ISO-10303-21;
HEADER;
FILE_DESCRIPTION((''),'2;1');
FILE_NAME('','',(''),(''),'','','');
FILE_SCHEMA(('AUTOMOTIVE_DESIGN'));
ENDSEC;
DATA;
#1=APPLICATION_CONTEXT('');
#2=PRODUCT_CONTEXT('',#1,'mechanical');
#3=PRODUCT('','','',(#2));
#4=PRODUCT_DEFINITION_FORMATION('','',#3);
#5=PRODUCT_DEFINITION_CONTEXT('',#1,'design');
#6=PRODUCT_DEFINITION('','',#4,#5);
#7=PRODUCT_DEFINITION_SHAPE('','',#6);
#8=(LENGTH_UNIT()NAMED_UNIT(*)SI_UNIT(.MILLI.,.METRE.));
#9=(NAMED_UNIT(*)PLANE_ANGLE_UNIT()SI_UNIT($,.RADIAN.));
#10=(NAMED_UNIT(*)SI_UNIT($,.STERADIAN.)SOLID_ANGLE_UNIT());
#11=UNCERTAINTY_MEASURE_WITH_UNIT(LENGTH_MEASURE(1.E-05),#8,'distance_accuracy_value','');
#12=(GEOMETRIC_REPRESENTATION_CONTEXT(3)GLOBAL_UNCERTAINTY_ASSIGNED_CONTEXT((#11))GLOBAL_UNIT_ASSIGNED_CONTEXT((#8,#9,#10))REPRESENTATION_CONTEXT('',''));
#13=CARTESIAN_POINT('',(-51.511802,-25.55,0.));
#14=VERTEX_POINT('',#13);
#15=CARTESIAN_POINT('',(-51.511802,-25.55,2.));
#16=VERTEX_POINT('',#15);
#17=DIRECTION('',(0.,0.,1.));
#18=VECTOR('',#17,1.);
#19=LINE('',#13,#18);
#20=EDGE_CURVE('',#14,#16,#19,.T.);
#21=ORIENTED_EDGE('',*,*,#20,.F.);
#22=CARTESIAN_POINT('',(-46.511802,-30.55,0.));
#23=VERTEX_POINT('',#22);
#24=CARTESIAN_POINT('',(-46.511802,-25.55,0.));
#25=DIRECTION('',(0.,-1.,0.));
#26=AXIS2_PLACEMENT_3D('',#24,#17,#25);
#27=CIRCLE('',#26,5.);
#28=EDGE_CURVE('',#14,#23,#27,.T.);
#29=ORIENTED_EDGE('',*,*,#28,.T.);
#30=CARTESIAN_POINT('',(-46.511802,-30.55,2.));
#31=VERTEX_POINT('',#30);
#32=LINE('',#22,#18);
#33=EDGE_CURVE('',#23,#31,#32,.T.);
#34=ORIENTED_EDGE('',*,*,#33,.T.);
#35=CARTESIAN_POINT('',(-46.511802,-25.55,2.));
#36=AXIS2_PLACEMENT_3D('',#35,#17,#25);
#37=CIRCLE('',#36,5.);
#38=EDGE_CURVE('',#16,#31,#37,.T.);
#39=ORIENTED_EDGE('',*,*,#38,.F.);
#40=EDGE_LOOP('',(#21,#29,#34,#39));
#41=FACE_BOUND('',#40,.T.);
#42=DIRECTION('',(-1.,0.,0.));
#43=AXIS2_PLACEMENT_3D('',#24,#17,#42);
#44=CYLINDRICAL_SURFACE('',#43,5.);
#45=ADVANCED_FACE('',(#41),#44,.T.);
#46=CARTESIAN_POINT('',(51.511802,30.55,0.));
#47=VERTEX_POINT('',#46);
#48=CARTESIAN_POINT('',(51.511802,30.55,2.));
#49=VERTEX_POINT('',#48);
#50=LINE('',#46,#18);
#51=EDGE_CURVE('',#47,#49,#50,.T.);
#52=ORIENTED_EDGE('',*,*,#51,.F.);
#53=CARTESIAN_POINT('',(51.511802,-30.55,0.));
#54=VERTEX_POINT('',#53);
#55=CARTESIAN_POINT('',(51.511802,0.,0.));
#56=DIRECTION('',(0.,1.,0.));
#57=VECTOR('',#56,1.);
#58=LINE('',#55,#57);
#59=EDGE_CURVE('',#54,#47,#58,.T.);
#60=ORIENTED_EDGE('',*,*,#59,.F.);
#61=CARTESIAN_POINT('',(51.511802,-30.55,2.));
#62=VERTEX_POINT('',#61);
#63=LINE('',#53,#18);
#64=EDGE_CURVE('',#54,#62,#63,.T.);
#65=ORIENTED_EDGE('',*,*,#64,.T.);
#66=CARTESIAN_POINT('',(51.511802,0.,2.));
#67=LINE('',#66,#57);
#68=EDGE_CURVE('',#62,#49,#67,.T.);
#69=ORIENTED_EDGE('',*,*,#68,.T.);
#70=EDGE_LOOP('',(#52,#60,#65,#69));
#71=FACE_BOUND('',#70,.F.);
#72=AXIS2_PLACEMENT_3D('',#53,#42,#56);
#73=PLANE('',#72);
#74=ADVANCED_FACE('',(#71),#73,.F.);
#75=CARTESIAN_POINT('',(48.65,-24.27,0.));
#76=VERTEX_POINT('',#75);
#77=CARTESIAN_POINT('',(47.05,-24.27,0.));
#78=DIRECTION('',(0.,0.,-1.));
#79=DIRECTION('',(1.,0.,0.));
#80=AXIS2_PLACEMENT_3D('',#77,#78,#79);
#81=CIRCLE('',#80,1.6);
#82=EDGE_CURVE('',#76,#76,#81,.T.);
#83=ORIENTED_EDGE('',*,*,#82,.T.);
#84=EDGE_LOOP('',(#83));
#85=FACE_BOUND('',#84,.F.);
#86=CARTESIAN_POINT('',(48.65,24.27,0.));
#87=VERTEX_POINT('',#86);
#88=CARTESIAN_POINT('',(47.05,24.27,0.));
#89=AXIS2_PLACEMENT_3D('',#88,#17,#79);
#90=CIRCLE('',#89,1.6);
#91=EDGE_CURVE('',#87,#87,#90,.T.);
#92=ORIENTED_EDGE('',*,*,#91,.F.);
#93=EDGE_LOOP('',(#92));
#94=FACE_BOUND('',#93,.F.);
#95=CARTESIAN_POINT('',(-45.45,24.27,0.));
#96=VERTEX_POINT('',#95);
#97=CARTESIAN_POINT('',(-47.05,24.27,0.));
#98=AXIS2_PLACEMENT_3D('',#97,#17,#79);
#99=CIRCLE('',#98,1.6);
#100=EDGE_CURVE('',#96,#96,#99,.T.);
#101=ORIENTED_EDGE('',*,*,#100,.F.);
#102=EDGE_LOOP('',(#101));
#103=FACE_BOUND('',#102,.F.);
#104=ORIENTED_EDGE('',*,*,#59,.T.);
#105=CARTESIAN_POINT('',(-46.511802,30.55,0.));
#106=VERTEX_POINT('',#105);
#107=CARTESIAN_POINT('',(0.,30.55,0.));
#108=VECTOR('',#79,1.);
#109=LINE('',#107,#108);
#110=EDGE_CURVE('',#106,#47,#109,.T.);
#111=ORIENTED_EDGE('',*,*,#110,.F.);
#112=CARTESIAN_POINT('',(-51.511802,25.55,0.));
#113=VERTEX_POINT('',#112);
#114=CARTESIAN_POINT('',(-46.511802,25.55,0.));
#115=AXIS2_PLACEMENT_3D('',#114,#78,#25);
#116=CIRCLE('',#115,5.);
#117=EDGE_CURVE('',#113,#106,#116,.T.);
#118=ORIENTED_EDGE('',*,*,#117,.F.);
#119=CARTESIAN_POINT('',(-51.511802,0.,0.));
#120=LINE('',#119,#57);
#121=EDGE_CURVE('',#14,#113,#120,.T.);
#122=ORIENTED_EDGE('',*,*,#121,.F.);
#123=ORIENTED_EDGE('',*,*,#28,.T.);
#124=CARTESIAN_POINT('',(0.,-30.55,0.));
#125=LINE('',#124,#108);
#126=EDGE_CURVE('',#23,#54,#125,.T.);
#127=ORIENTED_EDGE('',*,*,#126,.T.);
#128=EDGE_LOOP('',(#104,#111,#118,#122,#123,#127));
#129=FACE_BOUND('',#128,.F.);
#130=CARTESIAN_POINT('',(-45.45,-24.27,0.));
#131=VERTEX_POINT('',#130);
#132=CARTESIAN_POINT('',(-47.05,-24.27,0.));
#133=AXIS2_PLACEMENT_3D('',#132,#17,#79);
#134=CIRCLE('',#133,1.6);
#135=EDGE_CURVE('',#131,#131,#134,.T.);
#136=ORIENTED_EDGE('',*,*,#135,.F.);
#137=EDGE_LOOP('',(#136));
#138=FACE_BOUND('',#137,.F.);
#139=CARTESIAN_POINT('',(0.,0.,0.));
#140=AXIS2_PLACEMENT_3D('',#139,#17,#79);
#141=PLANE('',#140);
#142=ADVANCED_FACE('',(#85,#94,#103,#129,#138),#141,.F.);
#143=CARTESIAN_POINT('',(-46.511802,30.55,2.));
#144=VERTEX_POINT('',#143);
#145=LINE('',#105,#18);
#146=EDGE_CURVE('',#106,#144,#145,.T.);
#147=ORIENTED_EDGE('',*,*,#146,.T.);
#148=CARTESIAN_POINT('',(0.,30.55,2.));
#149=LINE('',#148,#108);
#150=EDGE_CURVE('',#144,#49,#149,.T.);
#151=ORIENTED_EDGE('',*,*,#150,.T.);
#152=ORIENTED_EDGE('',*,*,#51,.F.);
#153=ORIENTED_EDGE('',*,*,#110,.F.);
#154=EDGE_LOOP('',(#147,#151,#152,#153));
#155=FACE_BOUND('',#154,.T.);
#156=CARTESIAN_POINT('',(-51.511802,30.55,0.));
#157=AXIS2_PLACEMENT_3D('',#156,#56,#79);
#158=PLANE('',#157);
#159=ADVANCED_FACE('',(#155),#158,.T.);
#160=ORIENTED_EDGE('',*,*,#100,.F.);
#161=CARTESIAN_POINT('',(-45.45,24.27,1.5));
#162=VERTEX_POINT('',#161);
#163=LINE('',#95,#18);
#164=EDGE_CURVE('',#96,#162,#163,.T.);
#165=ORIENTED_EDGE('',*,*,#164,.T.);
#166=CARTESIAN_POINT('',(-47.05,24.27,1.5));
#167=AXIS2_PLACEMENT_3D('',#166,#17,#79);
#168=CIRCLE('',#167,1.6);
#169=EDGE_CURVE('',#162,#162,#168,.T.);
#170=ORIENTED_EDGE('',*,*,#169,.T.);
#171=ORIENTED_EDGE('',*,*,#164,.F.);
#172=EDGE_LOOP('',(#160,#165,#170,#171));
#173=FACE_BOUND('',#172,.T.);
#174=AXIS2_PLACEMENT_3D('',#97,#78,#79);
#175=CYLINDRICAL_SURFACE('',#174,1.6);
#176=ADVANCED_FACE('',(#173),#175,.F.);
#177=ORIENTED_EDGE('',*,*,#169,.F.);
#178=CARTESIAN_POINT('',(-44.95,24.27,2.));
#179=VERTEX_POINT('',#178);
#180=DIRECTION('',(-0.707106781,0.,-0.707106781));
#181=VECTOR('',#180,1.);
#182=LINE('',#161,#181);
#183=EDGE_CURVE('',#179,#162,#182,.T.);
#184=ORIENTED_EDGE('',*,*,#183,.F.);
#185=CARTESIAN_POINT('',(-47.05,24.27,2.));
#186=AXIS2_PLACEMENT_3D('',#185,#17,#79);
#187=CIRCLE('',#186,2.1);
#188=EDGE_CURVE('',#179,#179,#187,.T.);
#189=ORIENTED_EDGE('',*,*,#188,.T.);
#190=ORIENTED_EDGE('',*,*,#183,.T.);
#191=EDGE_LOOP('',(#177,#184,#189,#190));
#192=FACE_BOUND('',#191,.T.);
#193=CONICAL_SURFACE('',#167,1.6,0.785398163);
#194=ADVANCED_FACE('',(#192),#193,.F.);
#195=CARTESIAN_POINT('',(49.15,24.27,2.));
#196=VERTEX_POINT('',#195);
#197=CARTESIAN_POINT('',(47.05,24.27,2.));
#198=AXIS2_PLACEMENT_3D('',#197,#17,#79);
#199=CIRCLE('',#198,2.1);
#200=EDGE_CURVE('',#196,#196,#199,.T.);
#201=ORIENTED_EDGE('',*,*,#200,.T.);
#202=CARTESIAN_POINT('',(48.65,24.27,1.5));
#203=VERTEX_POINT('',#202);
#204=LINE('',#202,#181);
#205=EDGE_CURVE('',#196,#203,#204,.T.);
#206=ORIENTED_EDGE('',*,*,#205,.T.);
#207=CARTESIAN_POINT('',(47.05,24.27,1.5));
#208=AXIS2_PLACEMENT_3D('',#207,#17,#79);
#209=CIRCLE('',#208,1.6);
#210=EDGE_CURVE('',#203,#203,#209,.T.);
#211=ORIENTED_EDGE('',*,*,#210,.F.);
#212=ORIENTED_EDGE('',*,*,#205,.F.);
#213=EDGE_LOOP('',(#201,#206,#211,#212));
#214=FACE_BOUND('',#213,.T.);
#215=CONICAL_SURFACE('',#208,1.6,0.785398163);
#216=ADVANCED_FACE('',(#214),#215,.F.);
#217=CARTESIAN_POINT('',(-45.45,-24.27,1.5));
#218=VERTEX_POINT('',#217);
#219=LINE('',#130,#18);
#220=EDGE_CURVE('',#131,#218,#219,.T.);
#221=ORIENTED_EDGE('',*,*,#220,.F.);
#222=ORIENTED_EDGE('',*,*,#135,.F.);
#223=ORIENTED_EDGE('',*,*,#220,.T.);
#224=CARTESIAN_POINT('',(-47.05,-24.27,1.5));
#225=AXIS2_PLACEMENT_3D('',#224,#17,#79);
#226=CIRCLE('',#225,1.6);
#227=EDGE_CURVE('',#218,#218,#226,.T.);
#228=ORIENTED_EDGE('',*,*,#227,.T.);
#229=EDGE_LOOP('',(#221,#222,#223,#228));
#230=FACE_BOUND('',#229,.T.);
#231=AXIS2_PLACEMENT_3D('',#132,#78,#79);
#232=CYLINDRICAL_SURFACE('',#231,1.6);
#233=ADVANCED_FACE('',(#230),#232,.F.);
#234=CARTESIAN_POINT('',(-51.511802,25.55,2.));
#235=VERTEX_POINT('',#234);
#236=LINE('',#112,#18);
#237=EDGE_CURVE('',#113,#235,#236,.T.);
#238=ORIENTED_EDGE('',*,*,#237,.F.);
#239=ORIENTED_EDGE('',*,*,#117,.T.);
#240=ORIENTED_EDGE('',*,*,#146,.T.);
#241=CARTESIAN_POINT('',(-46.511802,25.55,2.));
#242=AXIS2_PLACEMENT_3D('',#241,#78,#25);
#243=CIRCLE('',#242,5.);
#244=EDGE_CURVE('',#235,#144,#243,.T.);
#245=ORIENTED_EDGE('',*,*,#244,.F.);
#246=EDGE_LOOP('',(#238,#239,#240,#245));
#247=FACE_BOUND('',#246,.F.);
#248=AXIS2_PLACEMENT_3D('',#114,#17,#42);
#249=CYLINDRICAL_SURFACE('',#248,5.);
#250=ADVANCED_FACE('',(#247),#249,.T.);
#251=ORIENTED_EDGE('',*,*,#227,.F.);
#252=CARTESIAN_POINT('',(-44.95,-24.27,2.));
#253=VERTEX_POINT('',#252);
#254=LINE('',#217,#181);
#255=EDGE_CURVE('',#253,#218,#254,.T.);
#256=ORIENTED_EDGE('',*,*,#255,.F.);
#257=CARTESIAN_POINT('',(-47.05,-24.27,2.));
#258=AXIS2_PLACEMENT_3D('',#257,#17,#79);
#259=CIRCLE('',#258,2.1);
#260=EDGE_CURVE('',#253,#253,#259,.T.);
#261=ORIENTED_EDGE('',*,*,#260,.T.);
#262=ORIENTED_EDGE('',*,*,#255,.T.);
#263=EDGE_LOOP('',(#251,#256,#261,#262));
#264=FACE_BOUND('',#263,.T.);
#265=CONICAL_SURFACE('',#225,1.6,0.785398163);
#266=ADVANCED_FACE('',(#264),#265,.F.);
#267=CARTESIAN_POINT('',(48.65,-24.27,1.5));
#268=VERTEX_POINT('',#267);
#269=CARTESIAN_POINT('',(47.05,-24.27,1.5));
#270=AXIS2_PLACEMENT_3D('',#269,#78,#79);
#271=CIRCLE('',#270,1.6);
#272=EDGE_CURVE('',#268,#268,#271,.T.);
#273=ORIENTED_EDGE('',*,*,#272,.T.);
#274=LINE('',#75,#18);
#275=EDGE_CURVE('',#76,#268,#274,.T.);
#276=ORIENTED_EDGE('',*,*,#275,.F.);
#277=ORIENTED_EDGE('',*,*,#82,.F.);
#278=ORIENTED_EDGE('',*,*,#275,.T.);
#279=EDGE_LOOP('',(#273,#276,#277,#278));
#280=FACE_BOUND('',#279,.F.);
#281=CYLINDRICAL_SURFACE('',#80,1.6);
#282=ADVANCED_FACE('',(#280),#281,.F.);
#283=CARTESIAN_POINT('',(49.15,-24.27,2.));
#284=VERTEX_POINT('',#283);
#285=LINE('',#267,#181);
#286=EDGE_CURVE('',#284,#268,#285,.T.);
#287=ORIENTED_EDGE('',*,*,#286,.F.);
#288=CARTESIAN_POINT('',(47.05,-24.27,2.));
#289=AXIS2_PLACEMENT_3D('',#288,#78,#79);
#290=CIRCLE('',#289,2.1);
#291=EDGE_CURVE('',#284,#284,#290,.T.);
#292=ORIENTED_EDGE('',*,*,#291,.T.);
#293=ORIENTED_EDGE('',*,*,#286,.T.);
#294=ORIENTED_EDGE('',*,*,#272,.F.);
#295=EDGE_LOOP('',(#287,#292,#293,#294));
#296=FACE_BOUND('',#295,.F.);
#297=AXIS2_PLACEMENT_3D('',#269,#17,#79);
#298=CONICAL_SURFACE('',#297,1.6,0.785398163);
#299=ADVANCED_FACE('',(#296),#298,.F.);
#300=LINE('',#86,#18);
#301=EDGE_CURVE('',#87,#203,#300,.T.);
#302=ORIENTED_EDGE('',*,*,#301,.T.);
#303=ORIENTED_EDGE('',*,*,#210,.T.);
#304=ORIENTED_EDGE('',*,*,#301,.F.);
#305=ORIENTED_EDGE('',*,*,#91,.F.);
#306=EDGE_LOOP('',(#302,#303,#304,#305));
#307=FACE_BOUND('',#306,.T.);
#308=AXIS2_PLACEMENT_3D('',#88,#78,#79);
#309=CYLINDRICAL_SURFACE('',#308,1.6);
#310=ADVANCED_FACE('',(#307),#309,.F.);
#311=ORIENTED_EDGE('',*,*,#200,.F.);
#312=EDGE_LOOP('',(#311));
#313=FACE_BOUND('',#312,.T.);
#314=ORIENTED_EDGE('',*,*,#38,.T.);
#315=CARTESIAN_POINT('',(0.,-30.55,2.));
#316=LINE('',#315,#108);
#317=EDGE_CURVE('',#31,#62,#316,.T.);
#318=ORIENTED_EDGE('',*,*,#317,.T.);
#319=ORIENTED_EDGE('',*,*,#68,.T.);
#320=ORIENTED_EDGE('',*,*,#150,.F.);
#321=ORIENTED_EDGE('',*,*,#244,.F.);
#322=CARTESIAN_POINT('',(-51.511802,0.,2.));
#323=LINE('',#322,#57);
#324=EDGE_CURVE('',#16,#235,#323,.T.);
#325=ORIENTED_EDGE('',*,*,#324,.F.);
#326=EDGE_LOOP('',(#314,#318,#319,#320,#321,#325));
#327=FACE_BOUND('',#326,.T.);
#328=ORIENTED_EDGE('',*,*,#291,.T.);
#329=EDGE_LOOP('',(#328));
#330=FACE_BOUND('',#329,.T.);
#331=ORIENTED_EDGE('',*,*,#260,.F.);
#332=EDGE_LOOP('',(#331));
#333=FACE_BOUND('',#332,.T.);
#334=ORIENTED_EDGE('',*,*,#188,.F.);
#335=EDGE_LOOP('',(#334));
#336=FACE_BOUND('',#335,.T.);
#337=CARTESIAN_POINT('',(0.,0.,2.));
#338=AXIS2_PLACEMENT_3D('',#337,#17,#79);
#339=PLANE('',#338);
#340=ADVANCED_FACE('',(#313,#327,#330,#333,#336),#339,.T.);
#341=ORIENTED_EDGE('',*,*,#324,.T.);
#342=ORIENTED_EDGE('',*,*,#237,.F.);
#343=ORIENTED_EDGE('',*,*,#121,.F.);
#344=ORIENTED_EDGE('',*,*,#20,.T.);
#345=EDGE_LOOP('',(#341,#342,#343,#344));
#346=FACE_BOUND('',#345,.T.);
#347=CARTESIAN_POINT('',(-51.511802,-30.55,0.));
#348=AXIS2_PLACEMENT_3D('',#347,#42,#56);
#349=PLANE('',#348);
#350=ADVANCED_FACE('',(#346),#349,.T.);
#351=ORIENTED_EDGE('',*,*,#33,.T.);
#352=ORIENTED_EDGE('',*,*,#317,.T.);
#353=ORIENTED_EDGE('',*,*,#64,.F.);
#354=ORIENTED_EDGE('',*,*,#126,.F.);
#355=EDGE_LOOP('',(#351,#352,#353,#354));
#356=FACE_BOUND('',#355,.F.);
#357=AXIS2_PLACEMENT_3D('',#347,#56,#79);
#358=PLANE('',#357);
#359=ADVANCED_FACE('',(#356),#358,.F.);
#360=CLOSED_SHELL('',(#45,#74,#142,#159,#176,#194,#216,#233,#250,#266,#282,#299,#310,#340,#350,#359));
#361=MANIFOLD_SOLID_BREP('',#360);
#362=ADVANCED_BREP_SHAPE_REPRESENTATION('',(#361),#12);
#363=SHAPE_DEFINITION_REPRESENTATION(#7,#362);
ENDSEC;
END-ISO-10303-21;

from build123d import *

# Parameters (mm, degrees)
F0_W     = 103.0236035585
F0_H     = 61.1
F0_R     = 1.6
F1_DEPTH = 2
F2_R     = 5
F3_SIZE  = 0.5


with BuildPart() as f1:
    # F0 (on Top) → F1 (new body)
    with BuildSketch(Plane.XY):
        Rectangle(F0_W, F0_H)
        with Locations((-47.05, -24.27)):
            Circle(F0_R, mode=Mode.SUBTRACT)
        with BuildLine():
            ThreePointArc((45.45, -24.27), (47.05, -22.67), (48.65, -24.27))
            ThreePointArc((48.65, -24.27), (47.05, -25.87), (45.45, -24.27))
        make_face(mode=Mode.SUBTRACT)
        with Locations((-47.05, 24.27)):
            Circle(F0_R, mode=Mode.SUBTRACT)
        with Locations((47.05, 24.27)):
            Circle(F0_R, mode=Mode.SUBTRACT)
    extrude(amount=F1_DEPTH)

    # F2
    f2_edges = [f1.edges().sort_by_distance(p)[0] for p in [
        (-51.511802, -30.55, 1),
        (-51.511802, 30.55, 1),
    ]]
    fillet(f2_edges, radius=F2_R)

    # F3
    f3_edges = [f1.edges().sort_by_distance(p)[0] for p in [
        (-48.65, -24.27, 2),
        (-48.65, 24.27, 2),
        (45.45, 24.27, 2),
        (48.65, -24.27, 2),
    ]]
    chamfer(f3_edges, length=F3_SIZE)


solid = f1.part
